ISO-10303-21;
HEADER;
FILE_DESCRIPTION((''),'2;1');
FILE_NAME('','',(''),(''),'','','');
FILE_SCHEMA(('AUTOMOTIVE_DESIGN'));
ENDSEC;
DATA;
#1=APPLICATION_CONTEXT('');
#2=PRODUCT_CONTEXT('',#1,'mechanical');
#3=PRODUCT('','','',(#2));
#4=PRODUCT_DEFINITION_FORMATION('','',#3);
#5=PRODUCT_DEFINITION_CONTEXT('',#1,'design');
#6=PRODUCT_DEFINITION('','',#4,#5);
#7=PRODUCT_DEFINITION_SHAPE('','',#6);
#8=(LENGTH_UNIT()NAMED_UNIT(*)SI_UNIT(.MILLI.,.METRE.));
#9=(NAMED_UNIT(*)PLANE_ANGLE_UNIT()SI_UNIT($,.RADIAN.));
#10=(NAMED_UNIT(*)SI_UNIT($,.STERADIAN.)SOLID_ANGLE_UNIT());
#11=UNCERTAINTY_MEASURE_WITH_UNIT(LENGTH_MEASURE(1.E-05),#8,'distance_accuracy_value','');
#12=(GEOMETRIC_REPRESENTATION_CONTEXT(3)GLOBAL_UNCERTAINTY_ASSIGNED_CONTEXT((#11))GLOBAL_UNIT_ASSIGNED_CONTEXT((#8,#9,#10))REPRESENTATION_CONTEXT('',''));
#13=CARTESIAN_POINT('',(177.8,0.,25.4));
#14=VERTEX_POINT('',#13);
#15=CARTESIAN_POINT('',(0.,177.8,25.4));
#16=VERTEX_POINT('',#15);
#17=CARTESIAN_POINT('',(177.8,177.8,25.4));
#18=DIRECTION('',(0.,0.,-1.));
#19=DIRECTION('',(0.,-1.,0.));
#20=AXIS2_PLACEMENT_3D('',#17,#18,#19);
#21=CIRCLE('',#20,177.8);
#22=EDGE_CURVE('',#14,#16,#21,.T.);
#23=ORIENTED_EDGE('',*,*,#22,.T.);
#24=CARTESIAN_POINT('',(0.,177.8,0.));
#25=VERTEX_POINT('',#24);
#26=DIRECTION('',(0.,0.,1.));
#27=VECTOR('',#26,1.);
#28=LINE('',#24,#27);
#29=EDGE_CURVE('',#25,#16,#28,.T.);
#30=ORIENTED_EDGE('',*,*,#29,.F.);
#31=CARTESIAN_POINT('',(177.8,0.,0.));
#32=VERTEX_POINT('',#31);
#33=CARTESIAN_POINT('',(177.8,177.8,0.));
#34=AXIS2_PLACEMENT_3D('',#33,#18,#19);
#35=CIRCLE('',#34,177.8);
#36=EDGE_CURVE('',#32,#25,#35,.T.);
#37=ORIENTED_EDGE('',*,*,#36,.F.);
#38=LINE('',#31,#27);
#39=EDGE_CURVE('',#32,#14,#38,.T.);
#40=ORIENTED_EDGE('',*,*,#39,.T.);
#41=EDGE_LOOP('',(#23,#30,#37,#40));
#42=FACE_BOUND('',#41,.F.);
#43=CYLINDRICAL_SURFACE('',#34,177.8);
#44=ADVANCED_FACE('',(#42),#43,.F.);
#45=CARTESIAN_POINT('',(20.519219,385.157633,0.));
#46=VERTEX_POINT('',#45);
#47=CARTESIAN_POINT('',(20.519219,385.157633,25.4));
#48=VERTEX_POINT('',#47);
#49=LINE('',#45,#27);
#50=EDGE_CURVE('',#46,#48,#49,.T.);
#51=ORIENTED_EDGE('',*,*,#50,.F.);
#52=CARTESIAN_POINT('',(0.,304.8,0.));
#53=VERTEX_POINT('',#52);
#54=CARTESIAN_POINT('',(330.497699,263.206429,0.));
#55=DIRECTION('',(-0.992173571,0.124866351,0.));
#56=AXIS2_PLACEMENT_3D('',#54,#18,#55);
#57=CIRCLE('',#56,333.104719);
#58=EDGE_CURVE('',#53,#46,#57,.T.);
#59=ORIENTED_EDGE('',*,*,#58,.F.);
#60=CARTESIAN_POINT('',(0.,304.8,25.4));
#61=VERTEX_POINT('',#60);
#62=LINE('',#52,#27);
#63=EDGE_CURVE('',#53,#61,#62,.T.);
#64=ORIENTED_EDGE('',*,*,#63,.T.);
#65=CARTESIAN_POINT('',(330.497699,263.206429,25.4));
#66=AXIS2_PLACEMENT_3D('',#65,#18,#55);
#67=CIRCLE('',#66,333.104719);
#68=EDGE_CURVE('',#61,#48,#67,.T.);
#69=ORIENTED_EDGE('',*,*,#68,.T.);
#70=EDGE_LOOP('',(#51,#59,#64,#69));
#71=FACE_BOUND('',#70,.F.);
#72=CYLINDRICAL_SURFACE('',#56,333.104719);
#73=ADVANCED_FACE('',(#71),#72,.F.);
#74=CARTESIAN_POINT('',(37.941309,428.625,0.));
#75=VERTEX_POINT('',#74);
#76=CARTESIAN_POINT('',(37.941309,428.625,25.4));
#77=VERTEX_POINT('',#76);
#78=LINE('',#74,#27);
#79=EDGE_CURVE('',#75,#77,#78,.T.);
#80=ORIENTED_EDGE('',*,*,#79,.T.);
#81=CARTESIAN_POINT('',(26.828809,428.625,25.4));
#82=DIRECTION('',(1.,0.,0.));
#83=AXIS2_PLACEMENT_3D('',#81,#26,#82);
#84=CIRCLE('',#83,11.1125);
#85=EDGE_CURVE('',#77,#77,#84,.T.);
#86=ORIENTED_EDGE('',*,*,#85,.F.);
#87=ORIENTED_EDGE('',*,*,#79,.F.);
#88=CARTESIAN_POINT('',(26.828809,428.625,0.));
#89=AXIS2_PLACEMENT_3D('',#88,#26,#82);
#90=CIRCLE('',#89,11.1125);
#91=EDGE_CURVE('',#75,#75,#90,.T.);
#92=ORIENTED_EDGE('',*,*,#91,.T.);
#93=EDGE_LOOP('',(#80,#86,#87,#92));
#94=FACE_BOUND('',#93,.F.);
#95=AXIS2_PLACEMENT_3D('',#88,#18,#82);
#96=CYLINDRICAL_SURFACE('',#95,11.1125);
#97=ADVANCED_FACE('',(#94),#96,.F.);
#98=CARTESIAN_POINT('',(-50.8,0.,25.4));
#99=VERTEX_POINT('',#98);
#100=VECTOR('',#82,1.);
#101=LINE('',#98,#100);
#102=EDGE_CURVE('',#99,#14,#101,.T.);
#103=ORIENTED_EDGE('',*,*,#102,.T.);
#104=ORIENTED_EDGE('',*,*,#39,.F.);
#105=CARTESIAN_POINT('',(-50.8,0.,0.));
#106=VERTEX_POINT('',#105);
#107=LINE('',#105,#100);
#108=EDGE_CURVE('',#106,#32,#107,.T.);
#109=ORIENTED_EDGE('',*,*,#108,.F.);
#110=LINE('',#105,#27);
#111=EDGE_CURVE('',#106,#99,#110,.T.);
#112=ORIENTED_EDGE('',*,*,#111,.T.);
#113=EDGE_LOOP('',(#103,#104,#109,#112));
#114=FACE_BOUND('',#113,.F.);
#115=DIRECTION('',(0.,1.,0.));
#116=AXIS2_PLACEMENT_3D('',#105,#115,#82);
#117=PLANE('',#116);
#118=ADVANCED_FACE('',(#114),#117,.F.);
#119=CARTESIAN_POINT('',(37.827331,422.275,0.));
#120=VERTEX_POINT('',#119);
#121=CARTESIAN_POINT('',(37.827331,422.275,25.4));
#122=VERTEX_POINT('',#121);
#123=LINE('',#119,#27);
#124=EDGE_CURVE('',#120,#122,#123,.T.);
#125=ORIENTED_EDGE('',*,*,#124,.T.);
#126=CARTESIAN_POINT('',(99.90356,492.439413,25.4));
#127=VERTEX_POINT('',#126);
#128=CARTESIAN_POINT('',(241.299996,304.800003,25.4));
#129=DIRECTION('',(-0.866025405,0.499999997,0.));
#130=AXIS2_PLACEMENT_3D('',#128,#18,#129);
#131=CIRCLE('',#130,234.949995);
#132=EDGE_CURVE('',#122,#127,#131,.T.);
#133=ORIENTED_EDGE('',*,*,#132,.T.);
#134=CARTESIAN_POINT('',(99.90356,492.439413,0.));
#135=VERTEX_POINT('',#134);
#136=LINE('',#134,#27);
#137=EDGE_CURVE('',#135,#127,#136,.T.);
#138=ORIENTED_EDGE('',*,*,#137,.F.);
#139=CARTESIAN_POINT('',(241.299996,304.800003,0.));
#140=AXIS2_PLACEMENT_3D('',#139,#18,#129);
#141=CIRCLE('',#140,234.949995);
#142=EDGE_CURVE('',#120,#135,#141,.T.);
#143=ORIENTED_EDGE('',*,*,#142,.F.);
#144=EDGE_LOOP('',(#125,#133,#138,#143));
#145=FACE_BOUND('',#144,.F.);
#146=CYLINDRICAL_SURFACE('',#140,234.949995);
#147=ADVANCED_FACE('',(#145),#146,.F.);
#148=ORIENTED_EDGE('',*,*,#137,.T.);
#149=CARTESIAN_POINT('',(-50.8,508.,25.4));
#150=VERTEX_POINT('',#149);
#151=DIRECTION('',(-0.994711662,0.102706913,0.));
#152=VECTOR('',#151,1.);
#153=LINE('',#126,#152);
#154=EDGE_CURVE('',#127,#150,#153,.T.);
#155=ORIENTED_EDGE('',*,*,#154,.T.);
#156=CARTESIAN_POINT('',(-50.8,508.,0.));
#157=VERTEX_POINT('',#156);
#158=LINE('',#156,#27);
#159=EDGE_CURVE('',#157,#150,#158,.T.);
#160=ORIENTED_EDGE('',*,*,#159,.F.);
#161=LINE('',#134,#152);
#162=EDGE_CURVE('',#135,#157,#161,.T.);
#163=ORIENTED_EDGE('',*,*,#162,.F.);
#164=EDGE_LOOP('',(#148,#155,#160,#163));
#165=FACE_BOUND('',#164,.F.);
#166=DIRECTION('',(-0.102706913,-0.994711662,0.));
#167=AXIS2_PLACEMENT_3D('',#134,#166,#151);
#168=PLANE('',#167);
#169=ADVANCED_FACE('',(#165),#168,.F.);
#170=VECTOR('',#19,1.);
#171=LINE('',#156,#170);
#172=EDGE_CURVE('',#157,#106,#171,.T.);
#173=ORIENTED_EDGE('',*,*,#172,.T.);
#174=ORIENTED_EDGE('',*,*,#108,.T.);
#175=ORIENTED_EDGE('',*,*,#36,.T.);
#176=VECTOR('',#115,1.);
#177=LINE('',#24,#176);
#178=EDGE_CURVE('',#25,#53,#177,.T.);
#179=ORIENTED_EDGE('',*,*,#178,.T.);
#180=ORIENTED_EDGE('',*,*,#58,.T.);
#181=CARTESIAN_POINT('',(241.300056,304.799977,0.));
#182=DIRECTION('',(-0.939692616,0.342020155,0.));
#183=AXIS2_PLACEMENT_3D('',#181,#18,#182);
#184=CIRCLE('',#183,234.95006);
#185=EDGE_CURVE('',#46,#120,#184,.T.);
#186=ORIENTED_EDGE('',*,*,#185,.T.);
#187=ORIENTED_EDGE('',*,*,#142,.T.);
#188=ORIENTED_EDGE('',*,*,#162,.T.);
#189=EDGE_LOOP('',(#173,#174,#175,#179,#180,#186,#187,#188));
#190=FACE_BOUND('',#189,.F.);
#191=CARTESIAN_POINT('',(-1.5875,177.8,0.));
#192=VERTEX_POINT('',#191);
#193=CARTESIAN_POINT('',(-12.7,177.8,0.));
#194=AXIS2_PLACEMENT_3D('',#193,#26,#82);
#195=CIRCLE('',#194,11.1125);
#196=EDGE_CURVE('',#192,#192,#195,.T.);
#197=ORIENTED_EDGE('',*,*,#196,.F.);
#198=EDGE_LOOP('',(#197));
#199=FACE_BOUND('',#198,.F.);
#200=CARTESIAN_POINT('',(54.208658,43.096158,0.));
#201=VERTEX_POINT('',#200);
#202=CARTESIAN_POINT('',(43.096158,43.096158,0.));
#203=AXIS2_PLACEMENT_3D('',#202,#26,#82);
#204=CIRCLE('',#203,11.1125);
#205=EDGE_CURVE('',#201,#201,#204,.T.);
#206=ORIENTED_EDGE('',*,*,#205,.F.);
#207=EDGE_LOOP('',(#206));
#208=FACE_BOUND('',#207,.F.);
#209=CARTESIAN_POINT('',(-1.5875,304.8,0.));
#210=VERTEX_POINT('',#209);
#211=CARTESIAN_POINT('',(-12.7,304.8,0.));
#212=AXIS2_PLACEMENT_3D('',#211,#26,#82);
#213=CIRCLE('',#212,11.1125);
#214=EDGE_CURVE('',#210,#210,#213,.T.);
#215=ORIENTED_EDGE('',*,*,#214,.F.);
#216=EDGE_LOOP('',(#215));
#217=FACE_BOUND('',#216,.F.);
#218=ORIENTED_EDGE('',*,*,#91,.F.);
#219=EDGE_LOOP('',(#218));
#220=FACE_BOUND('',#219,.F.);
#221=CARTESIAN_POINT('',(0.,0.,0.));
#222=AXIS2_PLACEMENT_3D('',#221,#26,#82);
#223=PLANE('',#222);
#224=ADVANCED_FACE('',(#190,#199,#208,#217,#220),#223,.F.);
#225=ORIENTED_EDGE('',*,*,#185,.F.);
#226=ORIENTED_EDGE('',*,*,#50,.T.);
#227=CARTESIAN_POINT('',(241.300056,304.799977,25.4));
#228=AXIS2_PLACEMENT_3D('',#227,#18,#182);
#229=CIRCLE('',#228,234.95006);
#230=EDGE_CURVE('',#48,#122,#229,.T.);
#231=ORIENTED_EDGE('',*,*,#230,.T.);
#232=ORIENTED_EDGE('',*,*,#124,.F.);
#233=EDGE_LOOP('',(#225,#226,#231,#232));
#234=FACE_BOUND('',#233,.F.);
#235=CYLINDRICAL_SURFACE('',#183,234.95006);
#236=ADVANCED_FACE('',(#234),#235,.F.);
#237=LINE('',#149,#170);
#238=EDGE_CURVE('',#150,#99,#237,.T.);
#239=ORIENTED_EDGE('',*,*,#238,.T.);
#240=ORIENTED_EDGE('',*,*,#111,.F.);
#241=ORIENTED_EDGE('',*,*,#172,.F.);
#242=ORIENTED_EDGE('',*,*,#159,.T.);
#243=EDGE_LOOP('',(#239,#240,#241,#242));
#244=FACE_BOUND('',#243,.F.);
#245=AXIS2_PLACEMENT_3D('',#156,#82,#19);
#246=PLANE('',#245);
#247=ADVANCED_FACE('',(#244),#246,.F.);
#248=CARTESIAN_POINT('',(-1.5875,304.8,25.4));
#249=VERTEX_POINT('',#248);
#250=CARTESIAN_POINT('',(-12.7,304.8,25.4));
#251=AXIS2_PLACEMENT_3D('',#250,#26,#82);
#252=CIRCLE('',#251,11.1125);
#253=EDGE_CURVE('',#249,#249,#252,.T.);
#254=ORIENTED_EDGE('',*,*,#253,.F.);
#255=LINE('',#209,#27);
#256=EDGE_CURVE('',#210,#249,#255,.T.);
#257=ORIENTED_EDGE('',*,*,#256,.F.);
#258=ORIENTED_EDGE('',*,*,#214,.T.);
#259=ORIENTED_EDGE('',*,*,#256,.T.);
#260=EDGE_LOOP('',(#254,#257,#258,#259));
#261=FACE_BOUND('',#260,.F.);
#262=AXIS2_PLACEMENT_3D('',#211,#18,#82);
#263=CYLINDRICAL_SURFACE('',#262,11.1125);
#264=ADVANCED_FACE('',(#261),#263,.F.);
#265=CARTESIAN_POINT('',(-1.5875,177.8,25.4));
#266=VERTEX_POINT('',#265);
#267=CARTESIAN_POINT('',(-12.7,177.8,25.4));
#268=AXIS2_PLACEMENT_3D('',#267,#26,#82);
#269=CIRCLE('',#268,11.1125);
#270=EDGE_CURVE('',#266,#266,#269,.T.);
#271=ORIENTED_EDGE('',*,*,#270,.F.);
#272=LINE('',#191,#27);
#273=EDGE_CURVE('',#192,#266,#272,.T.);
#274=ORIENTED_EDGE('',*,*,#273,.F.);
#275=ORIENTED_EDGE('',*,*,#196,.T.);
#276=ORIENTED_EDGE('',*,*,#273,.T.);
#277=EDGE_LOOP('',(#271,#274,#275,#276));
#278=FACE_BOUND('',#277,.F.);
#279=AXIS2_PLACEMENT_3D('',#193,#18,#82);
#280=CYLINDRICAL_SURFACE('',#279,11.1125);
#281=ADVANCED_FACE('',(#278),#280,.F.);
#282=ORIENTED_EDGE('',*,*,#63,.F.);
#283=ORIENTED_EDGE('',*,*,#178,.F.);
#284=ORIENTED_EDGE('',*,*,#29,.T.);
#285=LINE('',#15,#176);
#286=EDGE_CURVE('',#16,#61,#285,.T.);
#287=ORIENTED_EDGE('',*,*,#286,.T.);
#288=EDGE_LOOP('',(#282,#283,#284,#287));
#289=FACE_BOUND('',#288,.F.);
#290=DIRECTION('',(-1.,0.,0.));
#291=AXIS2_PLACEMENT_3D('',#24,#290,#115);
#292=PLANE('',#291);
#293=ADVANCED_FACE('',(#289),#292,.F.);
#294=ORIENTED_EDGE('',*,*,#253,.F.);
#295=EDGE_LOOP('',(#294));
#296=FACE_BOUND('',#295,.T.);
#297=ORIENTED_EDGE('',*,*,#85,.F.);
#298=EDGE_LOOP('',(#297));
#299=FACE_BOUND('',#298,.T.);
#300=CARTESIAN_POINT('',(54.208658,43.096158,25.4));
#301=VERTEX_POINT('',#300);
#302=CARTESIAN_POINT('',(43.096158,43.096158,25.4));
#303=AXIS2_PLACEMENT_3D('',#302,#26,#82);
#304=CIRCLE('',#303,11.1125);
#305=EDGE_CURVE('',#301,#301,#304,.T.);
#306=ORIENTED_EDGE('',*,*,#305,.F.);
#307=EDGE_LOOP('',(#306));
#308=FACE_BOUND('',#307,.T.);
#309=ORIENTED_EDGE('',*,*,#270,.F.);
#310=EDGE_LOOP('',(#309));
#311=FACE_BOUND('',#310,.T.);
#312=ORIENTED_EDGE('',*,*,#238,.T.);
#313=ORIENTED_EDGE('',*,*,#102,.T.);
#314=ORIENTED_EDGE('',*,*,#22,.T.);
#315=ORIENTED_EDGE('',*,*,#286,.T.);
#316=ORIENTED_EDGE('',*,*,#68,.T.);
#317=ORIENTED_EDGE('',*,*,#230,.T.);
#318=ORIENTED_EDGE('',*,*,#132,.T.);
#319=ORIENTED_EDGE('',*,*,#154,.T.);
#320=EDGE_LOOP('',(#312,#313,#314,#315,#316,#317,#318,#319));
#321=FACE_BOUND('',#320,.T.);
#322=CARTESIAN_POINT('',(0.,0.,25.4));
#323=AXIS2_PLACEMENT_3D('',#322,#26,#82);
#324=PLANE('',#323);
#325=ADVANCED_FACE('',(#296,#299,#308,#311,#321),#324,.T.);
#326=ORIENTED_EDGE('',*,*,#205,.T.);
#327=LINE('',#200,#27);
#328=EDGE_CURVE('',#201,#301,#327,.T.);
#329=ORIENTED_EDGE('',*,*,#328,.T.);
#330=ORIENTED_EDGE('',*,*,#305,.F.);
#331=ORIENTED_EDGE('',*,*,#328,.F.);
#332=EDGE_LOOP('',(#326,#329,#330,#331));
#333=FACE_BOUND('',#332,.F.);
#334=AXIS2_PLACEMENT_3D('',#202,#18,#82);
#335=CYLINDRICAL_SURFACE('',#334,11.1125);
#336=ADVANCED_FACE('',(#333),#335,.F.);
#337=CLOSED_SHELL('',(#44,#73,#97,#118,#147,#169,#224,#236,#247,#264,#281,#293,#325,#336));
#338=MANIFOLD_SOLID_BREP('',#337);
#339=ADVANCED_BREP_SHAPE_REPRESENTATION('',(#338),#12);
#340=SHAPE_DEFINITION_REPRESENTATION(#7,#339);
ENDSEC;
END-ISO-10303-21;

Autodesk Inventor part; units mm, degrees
ref_plane "YZ Plane" through (0, 0, 0) normal (1, 0, 0) x (0, 1, 0)
ref_plane "XZ Plane" through (0, 0, 0) normal (0, 1, 0) x (-1, 0, 0)
ref_plane "XY Plane" through (0, 0, 0) normal (0, 0, 1) x (1, 0, 0)
sketch "Sketch1" plane through (0, 0, 0) normal (0, 0, 1) x (1, 0, 0)
  line L0 (0, 0) -> (609.6, 0) construction
  line L1 (609.6, 0) -> (609.6, 209.55)
  line L2 (609.6, 209.55) -> (0, 209.55) construction
  line L3 (0, 209.55) -> (0, 0) construction
  line L4 (0, 0) -> (304.8, 0) construction
  line L5 (304.8, 0) -> (304.8, 165.1) construction
  line L6 (304.8, 165.1) -> (0, 165.1) construction
  line L7 (0, 165.1) -> (0, 0) construction
  line L8 (0, 0) -> (165.1, 0) construction
  line L9 (165.1, 0) -> (165.1, 304.8) construction
  line L10 (165.1, 304.8) -> (0, 304.8) construction
  line L11 (0, 304.8) -> (0, 0) construction
  line L12 (0, 0) -> (177.8, 0) construction
  line L13 (177.8, 0) -> (177.8, 177.8) construction
  line L14 (177.8, 177.8) -> (0, 177.8) construction
  line L15 (0, 177.8) -> (0, 0) construction
  circle A0 centre (177.8, 177.8) radius 12.7
  line L16 (177.8, 177.8) -> (165.1, 177.8)
  line L17 (177.8, 177.8) -> (177.8, 165.1)
  line L18 (177.8, 177.8) -> (168.819744, 168.819744)
  line L19 (177.8, 177.8) -> (190.5, 177.8) construction
  line L20 (168.819744, 168.819744) -> (52.076414, 52.076414) construction
  line L21 (168.819744, 168.819744) -> (333.919744, 168.819744) construction
  line L22 (177.8, 165.1) -> (177.8, 0) construction
  line L23 (165.1, 177.8) -> (0, 177.8) construction
  arc A1 (0, 177.8) -> (177.8, 0) centre (177.8, 177.8) ccw
  line L24 (177.8, 177.8) -> (304.8, 177.8) construction
  line L25 (304.8, 177.8) -> (304.8, 193.675)
  line L26 (304.8, 193.675) -> (177.8, 193.675) construction
  line L27 (177.8, 193.675) -> (177.8, 177.8) construction
  circle A2 centre (304.8, 193.675) radius 12.7
  line L28 (304.8, 193.675) -> (431.8, 193.675) construction
  line L29 (431.8, 193.675) -> (431.8, 209.55) construction
  line L30 (431.8, 209.55) -> (304.8, 209.55) construction
  line L31 (304.8, 209.55) -> (304.8, 193.675) construction
  circle A3 centre (431.8, 209.55) radius 12.7
  line L32 (177.8, 0) -> (609.6, 0)
  line L33 (177.8, 165.1) -> (304.8, 180.975)
  line L34 (431.8, 196.85) -> (304.8, 180.975)
  line L35 (431.8, 196.85) -> (609.6, 209.55)
  line L36 (165.1, 177.8) -> (165.1, 304.8) construction
  line L37 (165.1, 304.8) -> (241.3, 304.8) construction
  circle A4 centre (241.3, 304.8) radius 76.2
  circle A5 centre (177.8, 228.6) radius 12.7
  line L38 (177.8, 177.8) -> (177.8, 228.6)
  line L39 (0, 177.8) -> (0, 304.8)
  line L40 (241.3, 304.8) -> (195.441695, 365.656026) construction
  line L41 (241.3, 304.8) -> (317.5, 304.8) construction
  line L42 (195.441695, 365.656026) -> (354.191695, 365.656026) construction
  line L43 (195.441695, 365.656026) -> (99.90356, 492.439413) construction
  line L44 (195.441695, 365.656026) -> (354.191695, 365.656026) construction
  line L45 (165.1, 304.8) -> (0, 304.8) construction
  line L46 (241.3, 304.8) -> (169.695422, 330.861935) construction
  line L47 (241.3, 304.8) -> (317.5, 304.8) construction
  line L48 (169.695422, 330.861935) -> (20.519219, 385.157633) construction
  line L49 (177.8, 0) -> (408.09644, 0) construction
  line L50 (241.3, 304.8) -> (317.5, 304.8) construction
  line L51 (241.3, 304.8) -> (175.308864, 342.9) construction
  line L52 (241.3, 304.8) -> (317.5, 304.8) construction
  line L53 (175.308864, 342.9) -> (37.827331, 422.275) construction
  arc A6 (99.90356, 492.439413) -> (20.519219, 385.157633) centre (241.3, 304.8) ccw
  arc A7 (37.827331, 422.275) -> (0, 304.8) centre (330.4977, 263.206429) ccw
  line L54 (37.827331, 422.275) -> (26.828809, 428.625) construction
  circle A8 centre (26.828809, 428.625) radius 12.7
  line L55 (0, 304.8) -> (-12.7, 304.8) construction
  circle A9 centre (-12.7, 304.8) radius 12.7
  line L56 (0, 177.8) -> (-12.7, 177.8) construction
  circle A10 centre (-12.7, 177.8) radius 12.7
  line L57 (52.076414, 52.076414) -> (43.096158, 43.096158) construction
  circle A11 centre (43.096158, 43.096158) radius 12.7
  line L58 (0, 177.8) -> (0, 304.8)
  circle A12 centre (43.096158, 43.096158) radius 11.1125
  circle A13 centre (-12.7, 304.8) radius 11.1125
  circle A14 centre (-12.7, 177.8) radius 11.1125
  circle A15 centre (26.828809, 428.625) radius 11.1125
  line L59 (190.5, 177.8) -> (393.7, 177.8) construction
  line L60 (609.6, 0) -> (-50.8, 0)
  line L61 (-50.8, 0) -> (-50.8, 508)
  line L62 (-50.8, 508) -> (99.90356, 492.439413)
  line L63 (177.8, 0) -> (-50.8, 0)
  point P0 (165.275068, 230.701449)
  point P1 (172.715134, 216.962383)
  dimension "d16" = 25.4
  dimension "d19" = 25.4
  dimension "d0" = 609.6
  dimension "d1" = 209.55
  dimension "d2" = 304.8
  dimension "d3" = 165.1
  dimension "d4" = 165.1
  dimension "d5" = 304.8
  dimension "d6" = 177.8
  dimension "d7" = 177.8
  dimension "d8" = 25.4
  dimension "d9" = 12.7
  dimension "d10" = 135
  dimension "d11" = 165.1
  dimension "d12" = 135
  dimension "d13" = 165.1
  dimension "d14" = 127
  dimension "d15" = 15.875
  dimension "d17" = 127
  dimension "d18" = 15.875
  dimension "d20" = 127
  dimension "d21" = 76.2
  dimension "d22" = 152.4
  dimension "d23" = 25.4
  dimension "d24" = 50.8
  dimension "d25" = 127
  dimension "d26" = 127
  dimension "d33" = 158.75
  dimension "d34" = 127
  dimension "d35" = 160
  dimension "d36" = 158.75
  dimension "d37" = 180
  dimension "d45" = 150
  dimension "d46" = 158.75
  dimension "d47" = 180
  dimension "d48" = 12.7
  dimension "d49" = 12.7
  dimension "d50" = 12.7
  dimension "d52" = 12.7
  dimension "d53" = 25.4
  dimension "d55" = 214.47119
  dimension "d56" = 22.225
  dimension "d57" = 22.225
  dimension "d58" = 22.225
  dimension "d59" = 22.225
  dimension "d60" = 134.70384
  dimension "d72" = 660.4
  dimension "d73" = 508
  dimension "d74" = 90
sketch "Sketch1 outline for Extrusion2" plane through (0, 0, 0) normal (0, 0, 1) x (1, 0, 0)
  line L0 (-50.8, 508) -> (-50.8, 0)
  line L1 (99.90356, 492.439413) -> (-50.8, 508)
  line L2 (-50.8, 0) -> (177.8, 0)
  arc A0 (37.827331, 422.275) -> (99.90356, 492.439413) centre (241.3, 304.8) cw
  arc A1 (177.8, 0) -> (0, 177.8) centre (177.8, 177.8) cw
  arc A2 (20.519219, 385.157633) -> (37.827331, 422.275) centre (241.3, 304.8) cw
  line L3 (0, 177.8) -> (0, 304.8)
  arc A3 (0, 304.8) -> (20.519219, 385.157633) centre (330.4977, 263.206429) cw
  circle A4 centre (-12.7, 177.8) radius 11.1125
  circle A5 centre (43.096158, 43.096158) radius 11.1125
  circle A6 centre (-12.7, 304.8) radius 11.1125
  circle A7 centre (26.828809, 428.625) radius 11.1125
extrude "Extrusion2" add sketch "Sketch1 outline for Extrusion2" along normal blind 25.4
